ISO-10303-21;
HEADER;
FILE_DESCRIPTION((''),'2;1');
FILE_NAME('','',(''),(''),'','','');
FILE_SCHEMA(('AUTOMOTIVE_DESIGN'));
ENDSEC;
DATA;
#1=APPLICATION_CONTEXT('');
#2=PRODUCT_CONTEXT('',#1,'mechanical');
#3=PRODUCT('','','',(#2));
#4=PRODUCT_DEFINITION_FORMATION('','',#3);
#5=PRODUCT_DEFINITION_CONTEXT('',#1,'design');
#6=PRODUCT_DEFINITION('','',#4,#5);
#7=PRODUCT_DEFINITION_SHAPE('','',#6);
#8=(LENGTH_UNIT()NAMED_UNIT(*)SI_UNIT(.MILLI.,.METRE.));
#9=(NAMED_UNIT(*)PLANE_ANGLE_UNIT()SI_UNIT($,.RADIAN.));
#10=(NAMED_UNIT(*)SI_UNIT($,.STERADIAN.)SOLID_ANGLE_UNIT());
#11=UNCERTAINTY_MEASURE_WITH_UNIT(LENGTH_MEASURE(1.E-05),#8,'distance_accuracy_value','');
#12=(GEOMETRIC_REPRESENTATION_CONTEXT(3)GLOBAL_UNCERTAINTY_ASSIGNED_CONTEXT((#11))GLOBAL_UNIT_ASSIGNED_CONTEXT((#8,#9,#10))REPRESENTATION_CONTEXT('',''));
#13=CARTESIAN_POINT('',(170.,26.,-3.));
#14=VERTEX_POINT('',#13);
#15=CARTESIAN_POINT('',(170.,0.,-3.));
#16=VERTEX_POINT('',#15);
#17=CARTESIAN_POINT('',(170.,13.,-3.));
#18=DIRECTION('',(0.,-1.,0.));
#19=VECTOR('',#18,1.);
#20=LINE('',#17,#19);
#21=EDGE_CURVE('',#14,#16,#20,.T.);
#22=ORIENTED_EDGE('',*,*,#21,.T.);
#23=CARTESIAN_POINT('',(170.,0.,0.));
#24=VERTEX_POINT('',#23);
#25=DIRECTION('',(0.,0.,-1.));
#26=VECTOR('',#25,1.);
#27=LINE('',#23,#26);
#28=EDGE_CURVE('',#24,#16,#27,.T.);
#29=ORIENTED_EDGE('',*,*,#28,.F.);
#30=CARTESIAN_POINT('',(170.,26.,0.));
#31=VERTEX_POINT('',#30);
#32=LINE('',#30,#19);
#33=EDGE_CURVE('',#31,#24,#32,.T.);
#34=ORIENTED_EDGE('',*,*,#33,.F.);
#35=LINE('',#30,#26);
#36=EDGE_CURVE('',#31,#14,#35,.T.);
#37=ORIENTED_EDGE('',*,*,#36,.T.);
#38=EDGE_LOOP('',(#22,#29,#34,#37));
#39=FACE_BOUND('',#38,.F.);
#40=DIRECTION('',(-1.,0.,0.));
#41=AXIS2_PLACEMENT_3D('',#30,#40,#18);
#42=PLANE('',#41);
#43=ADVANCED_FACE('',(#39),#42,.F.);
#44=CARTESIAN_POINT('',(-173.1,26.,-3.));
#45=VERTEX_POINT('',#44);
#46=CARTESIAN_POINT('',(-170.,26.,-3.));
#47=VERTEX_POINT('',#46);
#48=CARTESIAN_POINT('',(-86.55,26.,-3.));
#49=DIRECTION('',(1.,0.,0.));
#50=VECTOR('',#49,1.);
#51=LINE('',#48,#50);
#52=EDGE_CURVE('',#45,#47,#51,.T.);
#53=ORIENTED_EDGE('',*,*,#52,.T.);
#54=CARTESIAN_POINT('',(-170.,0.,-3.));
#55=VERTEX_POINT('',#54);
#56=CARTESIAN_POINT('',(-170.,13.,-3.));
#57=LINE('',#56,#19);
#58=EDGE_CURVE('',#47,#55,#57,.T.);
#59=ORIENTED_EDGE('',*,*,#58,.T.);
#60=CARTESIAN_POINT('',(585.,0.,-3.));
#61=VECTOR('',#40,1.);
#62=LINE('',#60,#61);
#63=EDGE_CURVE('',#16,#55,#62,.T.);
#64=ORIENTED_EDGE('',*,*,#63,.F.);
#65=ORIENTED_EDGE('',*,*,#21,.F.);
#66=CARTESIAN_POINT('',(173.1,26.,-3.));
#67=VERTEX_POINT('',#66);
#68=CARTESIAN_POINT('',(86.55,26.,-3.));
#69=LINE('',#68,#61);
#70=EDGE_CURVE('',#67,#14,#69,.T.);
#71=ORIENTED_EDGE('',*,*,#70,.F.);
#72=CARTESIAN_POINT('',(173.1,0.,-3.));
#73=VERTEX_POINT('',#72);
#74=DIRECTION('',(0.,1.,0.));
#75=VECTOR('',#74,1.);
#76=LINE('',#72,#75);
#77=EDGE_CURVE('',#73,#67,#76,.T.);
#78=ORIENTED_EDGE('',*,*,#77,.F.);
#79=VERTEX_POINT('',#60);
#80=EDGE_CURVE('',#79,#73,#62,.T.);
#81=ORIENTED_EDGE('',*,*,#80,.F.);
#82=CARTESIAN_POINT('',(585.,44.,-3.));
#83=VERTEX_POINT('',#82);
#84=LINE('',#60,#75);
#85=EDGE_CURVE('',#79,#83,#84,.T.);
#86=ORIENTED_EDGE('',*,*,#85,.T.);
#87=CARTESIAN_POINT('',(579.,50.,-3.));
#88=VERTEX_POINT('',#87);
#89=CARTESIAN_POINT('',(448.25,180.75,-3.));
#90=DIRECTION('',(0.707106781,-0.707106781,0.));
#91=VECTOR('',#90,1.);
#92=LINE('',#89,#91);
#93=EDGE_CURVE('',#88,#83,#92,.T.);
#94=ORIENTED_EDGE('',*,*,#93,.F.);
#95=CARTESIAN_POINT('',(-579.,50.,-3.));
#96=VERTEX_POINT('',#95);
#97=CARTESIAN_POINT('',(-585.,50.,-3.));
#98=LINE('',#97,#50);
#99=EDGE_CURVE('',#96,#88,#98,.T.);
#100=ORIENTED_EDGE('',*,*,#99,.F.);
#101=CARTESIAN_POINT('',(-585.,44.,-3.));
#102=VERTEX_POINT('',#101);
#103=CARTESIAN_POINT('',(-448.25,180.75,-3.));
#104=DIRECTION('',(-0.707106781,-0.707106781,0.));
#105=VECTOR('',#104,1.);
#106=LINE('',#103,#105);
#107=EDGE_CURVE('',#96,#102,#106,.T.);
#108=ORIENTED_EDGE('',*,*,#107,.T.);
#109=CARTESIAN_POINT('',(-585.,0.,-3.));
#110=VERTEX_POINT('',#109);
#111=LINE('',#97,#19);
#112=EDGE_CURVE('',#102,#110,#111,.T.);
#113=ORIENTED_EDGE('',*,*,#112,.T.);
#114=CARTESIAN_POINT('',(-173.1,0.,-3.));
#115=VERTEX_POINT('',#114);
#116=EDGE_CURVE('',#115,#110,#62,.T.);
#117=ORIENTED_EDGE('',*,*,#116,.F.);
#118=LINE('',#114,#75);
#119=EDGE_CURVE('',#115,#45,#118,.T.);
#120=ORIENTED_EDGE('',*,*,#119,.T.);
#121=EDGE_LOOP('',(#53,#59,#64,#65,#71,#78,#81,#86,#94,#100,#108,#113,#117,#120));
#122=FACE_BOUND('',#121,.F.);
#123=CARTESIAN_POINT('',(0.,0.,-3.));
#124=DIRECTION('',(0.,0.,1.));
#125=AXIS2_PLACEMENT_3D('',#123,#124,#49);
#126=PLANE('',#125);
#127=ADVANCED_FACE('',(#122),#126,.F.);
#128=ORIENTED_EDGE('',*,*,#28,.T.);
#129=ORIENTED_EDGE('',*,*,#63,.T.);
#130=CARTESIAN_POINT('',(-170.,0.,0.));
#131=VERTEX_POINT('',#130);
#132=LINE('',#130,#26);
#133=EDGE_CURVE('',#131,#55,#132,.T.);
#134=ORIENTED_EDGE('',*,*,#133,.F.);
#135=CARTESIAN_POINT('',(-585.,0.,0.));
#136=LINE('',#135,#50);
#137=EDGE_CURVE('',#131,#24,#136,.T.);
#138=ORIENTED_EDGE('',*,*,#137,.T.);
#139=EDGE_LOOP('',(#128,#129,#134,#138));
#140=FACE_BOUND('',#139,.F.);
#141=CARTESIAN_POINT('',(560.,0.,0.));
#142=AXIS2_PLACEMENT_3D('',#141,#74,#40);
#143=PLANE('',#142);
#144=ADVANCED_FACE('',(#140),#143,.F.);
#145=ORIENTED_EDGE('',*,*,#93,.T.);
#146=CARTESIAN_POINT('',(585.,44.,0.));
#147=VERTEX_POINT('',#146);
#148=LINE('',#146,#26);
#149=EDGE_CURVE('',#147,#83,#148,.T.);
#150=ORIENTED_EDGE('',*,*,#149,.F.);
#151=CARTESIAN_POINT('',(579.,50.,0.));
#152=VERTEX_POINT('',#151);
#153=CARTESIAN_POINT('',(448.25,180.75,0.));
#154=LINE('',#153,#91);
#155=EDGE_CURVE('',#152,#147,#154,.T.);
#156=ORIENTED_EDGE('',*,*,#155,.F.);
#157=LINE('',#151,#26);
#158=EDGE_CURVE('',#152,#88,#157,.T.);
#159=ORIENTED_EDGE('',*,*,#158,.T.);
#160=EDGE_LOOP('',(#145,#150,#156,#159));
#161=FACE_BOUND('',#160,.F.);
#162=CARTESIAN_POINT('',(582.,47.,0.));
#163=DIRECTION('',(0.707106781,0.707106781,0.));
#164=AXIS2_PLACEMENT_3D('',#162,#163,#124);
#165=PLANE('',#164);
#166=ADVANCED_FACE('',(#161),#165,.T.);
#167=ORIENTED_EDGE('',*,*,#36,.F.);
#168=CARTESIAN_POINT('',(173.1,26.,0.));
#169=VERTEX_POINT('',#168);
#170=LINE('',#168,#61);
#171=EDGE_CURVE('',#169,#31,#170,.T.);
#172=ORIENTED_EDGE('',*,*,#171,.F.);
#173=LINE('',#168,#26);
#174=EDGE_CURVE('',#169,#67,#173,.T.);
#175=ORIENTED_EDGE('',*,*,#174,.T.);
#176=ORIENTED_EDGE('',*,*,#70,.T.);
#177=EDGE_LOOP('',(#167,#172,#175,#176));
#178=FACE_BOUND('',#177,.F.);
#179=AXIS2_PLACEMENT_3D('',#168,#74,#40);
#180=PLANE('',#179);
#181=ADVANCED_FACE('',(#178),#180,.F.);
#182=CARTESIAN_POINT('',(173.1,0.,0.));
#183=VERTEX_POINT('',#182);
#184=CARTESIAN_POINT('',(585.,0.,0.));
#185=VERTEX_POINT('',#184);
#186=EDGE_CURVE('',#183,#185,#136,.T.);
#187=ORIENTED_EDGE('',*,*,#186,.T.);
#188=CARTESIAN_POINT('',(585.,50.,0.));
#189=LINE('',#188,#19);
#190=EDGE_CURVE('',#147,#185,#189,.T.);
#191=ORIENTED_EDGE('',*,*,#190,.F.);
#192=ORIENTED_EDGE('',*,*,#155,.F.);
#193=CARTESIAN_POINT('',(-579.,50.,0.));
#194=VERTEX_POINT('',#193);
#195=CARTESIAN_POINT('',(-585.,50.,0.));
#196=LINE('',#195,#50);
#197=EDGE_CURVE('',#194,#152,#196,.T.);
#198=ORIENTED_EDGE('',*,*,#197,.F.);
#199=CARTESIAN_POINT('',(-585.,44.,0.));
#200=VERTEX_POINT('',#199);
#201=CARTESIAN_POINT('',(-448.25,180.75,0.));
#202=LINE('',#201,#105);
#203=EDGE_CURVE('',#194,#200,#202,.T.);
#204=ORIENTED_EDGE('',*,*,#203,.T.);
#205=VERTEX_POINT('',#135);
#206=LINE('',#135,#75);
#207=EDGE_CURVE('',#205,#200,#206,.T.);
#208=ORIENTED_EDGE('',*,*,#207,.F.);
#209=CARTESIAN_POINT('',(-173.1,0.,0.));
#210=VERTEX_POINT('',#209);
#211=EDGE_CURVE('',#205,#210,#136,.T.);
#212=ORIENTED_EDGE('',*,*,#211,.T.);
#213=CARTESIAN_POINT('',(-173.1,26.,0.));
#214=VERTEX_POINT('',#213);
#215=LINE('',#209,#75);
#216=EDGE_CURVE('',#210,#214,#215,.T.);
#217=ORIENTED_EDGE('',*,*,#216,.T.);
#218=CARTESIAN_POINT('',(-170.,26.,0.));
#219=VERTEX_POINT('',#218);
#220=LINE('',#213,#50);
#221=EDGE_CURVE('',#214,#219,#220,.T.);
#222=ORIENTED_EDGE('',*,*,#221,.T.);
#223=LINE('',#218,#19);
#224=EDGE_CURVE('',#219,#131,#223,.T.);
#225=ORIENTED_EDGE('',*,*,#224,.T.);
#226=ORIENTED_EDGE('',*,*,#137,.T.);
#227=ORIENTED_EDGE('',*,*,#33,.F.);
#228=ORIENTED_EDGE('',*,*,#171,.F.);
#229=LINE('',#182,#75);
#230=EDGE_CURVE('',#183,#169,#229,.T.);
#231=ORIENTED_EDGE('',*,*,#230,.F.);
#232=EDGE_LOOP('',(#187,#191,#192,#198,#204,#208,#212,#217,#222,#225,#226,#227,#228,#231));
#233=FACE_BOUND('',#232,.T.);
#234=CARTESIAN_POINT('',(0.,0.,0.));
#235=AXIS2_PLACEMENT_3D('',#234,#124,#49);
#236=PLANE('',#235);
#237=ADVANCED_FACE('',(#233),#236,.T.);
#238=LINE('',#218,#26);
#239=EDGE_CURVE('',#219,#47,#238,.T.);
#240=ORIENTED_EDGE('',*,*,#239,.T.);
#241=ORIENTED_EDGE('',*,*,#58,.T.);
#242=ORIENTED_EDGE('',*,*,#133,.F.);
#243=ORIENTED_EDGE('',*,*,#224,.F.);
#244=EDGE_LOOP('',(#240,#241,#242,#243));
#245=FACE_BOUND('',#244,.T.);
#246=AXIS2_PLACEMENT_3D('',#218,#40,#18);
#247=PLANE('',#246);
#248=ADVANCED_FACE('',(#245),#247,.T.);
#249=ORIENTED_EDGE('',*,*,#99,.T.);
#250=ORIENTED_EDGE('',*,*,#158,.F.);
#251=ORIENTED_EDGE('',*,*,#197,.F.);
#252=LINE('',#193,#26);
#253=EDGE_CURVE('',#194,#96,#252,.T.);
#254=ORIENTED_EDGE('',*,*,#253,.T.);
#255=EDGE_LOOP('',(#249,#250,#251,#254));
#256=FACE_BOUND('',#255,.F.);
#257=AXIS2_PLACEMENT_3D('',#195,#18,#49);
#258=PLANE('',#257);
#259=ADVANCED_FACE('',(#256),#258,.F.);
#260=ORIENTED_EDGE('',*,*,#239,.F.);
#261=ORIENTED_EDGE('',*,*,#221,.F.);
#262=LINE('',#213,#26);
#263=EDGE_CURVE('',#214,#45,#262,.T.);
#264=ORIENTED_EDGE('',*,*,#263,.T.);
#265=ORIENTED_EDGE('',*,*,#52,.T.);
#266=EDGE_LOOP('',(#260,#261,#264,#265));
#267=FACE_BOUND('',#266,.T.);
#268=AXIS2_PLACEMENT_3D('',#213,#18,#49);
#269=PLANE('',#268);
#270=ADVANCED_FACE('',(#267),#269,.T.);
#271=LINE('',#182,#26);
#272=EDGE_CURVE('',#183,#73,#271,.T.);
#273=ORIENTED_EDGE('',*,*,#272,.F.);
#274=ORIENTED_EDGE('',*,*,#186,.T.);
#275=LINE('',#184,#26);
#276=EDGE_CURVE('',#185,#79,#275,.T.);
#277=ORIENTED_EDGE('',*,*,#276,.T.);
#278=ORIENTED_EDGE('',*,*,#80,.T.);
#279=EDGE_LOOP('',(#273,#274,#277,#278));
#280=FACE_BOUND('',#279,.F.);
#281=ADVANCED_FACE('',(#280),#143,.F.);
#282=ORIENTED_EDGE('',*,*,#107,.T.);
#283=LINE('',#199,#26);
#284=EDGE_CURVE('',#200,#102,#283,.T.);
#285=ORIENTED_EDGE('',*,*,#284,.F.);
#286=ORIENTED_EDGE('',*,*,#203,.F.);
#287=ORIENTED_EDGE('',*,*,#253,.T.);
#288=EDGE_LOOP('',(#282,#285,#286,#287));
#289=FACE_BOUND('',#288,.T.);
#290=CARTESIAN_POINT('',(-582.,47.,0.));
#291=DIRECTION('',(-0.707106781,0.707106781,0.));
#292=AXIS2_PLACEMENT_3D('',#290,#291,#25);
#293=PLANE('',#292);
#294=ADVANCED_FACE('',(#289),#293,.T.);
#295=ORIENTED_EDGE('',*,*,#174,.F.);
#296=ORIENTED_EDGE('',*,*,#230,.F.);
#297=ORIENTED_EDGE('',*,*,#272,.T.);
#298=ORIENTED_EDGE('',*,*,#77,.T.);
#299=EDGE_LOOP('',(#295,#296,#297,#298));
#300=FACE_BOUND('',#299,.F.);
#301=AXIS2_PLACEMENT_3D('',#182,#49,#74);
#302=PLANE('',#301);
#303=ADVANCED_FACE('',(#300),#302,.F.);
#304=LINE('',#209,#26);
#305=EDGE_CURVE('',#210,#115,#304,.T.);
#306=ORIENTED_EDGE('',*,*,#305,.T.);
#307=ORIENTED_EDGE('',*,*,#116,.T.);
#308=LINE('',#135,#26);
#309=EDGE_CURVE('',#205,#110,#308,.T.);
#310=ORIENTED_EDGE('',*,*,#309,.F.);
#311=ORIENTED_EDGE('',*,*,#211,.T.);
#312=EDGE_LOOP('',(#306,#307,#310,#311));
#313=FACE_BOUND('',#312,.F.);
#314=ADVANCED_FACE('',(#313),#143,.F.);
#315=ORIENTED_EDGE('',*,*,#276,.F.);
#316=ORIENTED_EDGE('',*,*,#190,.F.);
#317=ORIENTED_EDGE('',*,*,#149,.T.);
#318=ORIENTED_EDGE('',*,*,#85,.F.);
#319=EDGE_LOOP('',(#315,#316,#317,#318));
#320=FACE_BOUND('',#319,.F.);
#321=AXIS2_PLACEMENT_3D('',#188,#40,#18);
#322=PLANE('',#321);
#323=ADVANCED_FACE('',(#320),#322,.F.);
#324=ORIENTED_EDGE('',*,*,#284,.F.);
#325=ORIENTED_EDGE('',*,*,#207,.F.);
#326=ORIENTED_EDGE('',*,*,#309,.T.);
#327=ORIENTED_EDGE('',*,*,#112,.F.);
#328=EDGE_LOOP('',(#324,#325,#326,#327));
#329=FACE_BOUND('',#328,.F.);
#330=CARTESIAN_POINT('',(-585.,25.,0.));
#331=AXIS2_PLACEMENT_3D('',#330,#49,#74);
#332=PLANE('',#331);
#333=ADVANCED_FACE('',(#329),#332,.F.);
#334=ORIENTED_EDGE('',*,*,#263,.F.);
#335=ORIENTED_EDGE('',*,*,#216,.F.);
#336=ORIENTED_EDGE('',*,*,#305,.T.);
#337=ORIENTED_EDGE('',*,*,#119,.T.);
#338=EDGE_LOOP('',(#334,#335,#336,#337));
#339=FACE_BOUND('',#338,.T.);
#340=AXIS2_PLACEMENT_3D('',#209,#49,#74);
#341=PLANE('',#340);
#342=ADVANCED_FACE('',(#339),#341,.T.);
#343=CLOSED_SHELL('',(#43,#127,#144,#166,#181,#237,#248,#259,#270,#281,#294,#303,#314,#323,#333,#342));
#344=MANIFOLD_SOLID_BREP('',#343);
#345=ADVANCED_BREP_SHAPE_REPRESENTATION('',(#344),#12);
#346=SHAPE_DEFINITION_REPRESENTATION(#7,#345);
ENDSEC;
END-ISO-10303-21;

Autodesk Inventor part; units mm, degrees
ref_plane "YZ Plane" through (0, 0, 0) normal (1, 0, 0) x (0, 1, 0)
ref_plane "XZ Plane" through (0, 0, 0) normal (0, 1, 0) x (-1, 0, 0)
ref_plane "XY Plane" through (0, 0, 0) normal (0, 0, 1) x (1, 0, 0)
sketch "Sketch1" plane through (0, 0, 0) normal (0, 0, 1) x (1, 0, 0)
  line L0 (-585, 50) -> (585, 50)
  line L1 (585, 50) -> (585, 0)
  line L2 (585, 0) -> (-585, 0)
  line L3 (-585, 0) -> (-585, 50)
  circle A0 centre (-585, 0) radius 25
  circle A1 centre (585, 0) radius 25
  line L4 (585, 0) -> (642.2042, 48)
  line L5 (642.2042, 48) -> (642.2042, 50)
  line L6 (642.2042, 50) -> (585, 50)
  point P0 (0, 0)
  point P1 (0, 0)
  point P2 (-585, 25)
  point P3 (-560, 0)
  point P4 (560, 0)
  point P5 (585, 25)
  point P6 (604.1511, 16.0697)
  dimension "d16" = 50
  dimension "d17" = 1170
  dimension "d18" = 50
  dimension "d19" = 50
  dimension "d32" = 2
  dimension "d33" = 50
extrude "Plate2" add sketch "Sketch1" against normal blind 3 contours L0 L1 A1 L2 A0 L3 | A0 L2 L3 | L1 L2 A1 picked at (-583.1457, 16.4577)
sketch "Sketch2" plane through (0, 0, 0) normal (0, 0, 1) x (1, 0, 0)
  line L0 (-585, 0) -> (585, 0) projected
  line L1 (585, 50) -> (-585, 50) projected
  line L2 (-171.55, 26) -> (-171.55, 202.9149) construction
  line L3 (-173.1, 26) -> (-170, 26)
  line L4 (-170, 26) -> (-170, 0)
  line L5 (-170, 0) -> (-173.1, 0)
  line L6 (-173.1, 0) -> (-173.1, 26)
  line L7 (171.55, 26) -> (171.55, 202.9149) construction
  line L8 (170, 0) -> (173.1, 0)
  line L9 (173.1, 0) -> (173.1, 26)
  line L10 (173.1, 26) -> (170, 26)
  line L11 (170, 26) -> (170, 0)
  line L12 (0, 236.7146) -> (0, 0) construction
  point P0 (0, 0)
  point P1 (170, 0)
  point P2 (173.1, 0)
  point P3 (-173.1, 0)
  point P4 (-170, 0)
  dimension "d39" = 26
  dimension "d41" = 3.1
  dimension "d43" = 340
extrude "Extrusion1" cut sketch "Sketch2" against normal through all
sketch "Sketch4" plane through (0, 0, 0) normal (0, 0, 1) x (1, 0, 0)
  line L0 (-62.2268, 17.4688) -> (-62.2268, 36.055) construction
  line L1 (-62.2268, 36.055) -> (76.1261, 36.055) construction
  line L2 (76.1261, 36.055) -> (76.1261, 17.4688) construction
  line L3 (76.1261, 17.4688) -> (-62.2268, 17.4688) construction
  point P0 (0, 0)
mark "Mark1"
chamfer "Corner Chamfer1" distance 6 angle 45 2 edges at (585, 50, -1.5) (-585, 50, -1.5)
equation "\"d20\" = Thickness"
equation "\"BendReliefWidth\" = Thickness"
equation "\"BendReliefDepth\" = 0.5 * Thickness"
equation "\"CornerReliefSize\" = 4 * Thickness"
equation "\"MinimumRemnant\" = 2 * Thickness"
equation "\"TransitionRadius\" = BendRadius"
equation "\"JacobiRadiusSize\" = BendRadius"
equation "\"GapSize\" = Thickness"
equation "\"Thickness\" = 3"
equation "\"BendRadius\" = 5"
properties part number "MSC 108 RIB CONE" material "Stainless Steel"
